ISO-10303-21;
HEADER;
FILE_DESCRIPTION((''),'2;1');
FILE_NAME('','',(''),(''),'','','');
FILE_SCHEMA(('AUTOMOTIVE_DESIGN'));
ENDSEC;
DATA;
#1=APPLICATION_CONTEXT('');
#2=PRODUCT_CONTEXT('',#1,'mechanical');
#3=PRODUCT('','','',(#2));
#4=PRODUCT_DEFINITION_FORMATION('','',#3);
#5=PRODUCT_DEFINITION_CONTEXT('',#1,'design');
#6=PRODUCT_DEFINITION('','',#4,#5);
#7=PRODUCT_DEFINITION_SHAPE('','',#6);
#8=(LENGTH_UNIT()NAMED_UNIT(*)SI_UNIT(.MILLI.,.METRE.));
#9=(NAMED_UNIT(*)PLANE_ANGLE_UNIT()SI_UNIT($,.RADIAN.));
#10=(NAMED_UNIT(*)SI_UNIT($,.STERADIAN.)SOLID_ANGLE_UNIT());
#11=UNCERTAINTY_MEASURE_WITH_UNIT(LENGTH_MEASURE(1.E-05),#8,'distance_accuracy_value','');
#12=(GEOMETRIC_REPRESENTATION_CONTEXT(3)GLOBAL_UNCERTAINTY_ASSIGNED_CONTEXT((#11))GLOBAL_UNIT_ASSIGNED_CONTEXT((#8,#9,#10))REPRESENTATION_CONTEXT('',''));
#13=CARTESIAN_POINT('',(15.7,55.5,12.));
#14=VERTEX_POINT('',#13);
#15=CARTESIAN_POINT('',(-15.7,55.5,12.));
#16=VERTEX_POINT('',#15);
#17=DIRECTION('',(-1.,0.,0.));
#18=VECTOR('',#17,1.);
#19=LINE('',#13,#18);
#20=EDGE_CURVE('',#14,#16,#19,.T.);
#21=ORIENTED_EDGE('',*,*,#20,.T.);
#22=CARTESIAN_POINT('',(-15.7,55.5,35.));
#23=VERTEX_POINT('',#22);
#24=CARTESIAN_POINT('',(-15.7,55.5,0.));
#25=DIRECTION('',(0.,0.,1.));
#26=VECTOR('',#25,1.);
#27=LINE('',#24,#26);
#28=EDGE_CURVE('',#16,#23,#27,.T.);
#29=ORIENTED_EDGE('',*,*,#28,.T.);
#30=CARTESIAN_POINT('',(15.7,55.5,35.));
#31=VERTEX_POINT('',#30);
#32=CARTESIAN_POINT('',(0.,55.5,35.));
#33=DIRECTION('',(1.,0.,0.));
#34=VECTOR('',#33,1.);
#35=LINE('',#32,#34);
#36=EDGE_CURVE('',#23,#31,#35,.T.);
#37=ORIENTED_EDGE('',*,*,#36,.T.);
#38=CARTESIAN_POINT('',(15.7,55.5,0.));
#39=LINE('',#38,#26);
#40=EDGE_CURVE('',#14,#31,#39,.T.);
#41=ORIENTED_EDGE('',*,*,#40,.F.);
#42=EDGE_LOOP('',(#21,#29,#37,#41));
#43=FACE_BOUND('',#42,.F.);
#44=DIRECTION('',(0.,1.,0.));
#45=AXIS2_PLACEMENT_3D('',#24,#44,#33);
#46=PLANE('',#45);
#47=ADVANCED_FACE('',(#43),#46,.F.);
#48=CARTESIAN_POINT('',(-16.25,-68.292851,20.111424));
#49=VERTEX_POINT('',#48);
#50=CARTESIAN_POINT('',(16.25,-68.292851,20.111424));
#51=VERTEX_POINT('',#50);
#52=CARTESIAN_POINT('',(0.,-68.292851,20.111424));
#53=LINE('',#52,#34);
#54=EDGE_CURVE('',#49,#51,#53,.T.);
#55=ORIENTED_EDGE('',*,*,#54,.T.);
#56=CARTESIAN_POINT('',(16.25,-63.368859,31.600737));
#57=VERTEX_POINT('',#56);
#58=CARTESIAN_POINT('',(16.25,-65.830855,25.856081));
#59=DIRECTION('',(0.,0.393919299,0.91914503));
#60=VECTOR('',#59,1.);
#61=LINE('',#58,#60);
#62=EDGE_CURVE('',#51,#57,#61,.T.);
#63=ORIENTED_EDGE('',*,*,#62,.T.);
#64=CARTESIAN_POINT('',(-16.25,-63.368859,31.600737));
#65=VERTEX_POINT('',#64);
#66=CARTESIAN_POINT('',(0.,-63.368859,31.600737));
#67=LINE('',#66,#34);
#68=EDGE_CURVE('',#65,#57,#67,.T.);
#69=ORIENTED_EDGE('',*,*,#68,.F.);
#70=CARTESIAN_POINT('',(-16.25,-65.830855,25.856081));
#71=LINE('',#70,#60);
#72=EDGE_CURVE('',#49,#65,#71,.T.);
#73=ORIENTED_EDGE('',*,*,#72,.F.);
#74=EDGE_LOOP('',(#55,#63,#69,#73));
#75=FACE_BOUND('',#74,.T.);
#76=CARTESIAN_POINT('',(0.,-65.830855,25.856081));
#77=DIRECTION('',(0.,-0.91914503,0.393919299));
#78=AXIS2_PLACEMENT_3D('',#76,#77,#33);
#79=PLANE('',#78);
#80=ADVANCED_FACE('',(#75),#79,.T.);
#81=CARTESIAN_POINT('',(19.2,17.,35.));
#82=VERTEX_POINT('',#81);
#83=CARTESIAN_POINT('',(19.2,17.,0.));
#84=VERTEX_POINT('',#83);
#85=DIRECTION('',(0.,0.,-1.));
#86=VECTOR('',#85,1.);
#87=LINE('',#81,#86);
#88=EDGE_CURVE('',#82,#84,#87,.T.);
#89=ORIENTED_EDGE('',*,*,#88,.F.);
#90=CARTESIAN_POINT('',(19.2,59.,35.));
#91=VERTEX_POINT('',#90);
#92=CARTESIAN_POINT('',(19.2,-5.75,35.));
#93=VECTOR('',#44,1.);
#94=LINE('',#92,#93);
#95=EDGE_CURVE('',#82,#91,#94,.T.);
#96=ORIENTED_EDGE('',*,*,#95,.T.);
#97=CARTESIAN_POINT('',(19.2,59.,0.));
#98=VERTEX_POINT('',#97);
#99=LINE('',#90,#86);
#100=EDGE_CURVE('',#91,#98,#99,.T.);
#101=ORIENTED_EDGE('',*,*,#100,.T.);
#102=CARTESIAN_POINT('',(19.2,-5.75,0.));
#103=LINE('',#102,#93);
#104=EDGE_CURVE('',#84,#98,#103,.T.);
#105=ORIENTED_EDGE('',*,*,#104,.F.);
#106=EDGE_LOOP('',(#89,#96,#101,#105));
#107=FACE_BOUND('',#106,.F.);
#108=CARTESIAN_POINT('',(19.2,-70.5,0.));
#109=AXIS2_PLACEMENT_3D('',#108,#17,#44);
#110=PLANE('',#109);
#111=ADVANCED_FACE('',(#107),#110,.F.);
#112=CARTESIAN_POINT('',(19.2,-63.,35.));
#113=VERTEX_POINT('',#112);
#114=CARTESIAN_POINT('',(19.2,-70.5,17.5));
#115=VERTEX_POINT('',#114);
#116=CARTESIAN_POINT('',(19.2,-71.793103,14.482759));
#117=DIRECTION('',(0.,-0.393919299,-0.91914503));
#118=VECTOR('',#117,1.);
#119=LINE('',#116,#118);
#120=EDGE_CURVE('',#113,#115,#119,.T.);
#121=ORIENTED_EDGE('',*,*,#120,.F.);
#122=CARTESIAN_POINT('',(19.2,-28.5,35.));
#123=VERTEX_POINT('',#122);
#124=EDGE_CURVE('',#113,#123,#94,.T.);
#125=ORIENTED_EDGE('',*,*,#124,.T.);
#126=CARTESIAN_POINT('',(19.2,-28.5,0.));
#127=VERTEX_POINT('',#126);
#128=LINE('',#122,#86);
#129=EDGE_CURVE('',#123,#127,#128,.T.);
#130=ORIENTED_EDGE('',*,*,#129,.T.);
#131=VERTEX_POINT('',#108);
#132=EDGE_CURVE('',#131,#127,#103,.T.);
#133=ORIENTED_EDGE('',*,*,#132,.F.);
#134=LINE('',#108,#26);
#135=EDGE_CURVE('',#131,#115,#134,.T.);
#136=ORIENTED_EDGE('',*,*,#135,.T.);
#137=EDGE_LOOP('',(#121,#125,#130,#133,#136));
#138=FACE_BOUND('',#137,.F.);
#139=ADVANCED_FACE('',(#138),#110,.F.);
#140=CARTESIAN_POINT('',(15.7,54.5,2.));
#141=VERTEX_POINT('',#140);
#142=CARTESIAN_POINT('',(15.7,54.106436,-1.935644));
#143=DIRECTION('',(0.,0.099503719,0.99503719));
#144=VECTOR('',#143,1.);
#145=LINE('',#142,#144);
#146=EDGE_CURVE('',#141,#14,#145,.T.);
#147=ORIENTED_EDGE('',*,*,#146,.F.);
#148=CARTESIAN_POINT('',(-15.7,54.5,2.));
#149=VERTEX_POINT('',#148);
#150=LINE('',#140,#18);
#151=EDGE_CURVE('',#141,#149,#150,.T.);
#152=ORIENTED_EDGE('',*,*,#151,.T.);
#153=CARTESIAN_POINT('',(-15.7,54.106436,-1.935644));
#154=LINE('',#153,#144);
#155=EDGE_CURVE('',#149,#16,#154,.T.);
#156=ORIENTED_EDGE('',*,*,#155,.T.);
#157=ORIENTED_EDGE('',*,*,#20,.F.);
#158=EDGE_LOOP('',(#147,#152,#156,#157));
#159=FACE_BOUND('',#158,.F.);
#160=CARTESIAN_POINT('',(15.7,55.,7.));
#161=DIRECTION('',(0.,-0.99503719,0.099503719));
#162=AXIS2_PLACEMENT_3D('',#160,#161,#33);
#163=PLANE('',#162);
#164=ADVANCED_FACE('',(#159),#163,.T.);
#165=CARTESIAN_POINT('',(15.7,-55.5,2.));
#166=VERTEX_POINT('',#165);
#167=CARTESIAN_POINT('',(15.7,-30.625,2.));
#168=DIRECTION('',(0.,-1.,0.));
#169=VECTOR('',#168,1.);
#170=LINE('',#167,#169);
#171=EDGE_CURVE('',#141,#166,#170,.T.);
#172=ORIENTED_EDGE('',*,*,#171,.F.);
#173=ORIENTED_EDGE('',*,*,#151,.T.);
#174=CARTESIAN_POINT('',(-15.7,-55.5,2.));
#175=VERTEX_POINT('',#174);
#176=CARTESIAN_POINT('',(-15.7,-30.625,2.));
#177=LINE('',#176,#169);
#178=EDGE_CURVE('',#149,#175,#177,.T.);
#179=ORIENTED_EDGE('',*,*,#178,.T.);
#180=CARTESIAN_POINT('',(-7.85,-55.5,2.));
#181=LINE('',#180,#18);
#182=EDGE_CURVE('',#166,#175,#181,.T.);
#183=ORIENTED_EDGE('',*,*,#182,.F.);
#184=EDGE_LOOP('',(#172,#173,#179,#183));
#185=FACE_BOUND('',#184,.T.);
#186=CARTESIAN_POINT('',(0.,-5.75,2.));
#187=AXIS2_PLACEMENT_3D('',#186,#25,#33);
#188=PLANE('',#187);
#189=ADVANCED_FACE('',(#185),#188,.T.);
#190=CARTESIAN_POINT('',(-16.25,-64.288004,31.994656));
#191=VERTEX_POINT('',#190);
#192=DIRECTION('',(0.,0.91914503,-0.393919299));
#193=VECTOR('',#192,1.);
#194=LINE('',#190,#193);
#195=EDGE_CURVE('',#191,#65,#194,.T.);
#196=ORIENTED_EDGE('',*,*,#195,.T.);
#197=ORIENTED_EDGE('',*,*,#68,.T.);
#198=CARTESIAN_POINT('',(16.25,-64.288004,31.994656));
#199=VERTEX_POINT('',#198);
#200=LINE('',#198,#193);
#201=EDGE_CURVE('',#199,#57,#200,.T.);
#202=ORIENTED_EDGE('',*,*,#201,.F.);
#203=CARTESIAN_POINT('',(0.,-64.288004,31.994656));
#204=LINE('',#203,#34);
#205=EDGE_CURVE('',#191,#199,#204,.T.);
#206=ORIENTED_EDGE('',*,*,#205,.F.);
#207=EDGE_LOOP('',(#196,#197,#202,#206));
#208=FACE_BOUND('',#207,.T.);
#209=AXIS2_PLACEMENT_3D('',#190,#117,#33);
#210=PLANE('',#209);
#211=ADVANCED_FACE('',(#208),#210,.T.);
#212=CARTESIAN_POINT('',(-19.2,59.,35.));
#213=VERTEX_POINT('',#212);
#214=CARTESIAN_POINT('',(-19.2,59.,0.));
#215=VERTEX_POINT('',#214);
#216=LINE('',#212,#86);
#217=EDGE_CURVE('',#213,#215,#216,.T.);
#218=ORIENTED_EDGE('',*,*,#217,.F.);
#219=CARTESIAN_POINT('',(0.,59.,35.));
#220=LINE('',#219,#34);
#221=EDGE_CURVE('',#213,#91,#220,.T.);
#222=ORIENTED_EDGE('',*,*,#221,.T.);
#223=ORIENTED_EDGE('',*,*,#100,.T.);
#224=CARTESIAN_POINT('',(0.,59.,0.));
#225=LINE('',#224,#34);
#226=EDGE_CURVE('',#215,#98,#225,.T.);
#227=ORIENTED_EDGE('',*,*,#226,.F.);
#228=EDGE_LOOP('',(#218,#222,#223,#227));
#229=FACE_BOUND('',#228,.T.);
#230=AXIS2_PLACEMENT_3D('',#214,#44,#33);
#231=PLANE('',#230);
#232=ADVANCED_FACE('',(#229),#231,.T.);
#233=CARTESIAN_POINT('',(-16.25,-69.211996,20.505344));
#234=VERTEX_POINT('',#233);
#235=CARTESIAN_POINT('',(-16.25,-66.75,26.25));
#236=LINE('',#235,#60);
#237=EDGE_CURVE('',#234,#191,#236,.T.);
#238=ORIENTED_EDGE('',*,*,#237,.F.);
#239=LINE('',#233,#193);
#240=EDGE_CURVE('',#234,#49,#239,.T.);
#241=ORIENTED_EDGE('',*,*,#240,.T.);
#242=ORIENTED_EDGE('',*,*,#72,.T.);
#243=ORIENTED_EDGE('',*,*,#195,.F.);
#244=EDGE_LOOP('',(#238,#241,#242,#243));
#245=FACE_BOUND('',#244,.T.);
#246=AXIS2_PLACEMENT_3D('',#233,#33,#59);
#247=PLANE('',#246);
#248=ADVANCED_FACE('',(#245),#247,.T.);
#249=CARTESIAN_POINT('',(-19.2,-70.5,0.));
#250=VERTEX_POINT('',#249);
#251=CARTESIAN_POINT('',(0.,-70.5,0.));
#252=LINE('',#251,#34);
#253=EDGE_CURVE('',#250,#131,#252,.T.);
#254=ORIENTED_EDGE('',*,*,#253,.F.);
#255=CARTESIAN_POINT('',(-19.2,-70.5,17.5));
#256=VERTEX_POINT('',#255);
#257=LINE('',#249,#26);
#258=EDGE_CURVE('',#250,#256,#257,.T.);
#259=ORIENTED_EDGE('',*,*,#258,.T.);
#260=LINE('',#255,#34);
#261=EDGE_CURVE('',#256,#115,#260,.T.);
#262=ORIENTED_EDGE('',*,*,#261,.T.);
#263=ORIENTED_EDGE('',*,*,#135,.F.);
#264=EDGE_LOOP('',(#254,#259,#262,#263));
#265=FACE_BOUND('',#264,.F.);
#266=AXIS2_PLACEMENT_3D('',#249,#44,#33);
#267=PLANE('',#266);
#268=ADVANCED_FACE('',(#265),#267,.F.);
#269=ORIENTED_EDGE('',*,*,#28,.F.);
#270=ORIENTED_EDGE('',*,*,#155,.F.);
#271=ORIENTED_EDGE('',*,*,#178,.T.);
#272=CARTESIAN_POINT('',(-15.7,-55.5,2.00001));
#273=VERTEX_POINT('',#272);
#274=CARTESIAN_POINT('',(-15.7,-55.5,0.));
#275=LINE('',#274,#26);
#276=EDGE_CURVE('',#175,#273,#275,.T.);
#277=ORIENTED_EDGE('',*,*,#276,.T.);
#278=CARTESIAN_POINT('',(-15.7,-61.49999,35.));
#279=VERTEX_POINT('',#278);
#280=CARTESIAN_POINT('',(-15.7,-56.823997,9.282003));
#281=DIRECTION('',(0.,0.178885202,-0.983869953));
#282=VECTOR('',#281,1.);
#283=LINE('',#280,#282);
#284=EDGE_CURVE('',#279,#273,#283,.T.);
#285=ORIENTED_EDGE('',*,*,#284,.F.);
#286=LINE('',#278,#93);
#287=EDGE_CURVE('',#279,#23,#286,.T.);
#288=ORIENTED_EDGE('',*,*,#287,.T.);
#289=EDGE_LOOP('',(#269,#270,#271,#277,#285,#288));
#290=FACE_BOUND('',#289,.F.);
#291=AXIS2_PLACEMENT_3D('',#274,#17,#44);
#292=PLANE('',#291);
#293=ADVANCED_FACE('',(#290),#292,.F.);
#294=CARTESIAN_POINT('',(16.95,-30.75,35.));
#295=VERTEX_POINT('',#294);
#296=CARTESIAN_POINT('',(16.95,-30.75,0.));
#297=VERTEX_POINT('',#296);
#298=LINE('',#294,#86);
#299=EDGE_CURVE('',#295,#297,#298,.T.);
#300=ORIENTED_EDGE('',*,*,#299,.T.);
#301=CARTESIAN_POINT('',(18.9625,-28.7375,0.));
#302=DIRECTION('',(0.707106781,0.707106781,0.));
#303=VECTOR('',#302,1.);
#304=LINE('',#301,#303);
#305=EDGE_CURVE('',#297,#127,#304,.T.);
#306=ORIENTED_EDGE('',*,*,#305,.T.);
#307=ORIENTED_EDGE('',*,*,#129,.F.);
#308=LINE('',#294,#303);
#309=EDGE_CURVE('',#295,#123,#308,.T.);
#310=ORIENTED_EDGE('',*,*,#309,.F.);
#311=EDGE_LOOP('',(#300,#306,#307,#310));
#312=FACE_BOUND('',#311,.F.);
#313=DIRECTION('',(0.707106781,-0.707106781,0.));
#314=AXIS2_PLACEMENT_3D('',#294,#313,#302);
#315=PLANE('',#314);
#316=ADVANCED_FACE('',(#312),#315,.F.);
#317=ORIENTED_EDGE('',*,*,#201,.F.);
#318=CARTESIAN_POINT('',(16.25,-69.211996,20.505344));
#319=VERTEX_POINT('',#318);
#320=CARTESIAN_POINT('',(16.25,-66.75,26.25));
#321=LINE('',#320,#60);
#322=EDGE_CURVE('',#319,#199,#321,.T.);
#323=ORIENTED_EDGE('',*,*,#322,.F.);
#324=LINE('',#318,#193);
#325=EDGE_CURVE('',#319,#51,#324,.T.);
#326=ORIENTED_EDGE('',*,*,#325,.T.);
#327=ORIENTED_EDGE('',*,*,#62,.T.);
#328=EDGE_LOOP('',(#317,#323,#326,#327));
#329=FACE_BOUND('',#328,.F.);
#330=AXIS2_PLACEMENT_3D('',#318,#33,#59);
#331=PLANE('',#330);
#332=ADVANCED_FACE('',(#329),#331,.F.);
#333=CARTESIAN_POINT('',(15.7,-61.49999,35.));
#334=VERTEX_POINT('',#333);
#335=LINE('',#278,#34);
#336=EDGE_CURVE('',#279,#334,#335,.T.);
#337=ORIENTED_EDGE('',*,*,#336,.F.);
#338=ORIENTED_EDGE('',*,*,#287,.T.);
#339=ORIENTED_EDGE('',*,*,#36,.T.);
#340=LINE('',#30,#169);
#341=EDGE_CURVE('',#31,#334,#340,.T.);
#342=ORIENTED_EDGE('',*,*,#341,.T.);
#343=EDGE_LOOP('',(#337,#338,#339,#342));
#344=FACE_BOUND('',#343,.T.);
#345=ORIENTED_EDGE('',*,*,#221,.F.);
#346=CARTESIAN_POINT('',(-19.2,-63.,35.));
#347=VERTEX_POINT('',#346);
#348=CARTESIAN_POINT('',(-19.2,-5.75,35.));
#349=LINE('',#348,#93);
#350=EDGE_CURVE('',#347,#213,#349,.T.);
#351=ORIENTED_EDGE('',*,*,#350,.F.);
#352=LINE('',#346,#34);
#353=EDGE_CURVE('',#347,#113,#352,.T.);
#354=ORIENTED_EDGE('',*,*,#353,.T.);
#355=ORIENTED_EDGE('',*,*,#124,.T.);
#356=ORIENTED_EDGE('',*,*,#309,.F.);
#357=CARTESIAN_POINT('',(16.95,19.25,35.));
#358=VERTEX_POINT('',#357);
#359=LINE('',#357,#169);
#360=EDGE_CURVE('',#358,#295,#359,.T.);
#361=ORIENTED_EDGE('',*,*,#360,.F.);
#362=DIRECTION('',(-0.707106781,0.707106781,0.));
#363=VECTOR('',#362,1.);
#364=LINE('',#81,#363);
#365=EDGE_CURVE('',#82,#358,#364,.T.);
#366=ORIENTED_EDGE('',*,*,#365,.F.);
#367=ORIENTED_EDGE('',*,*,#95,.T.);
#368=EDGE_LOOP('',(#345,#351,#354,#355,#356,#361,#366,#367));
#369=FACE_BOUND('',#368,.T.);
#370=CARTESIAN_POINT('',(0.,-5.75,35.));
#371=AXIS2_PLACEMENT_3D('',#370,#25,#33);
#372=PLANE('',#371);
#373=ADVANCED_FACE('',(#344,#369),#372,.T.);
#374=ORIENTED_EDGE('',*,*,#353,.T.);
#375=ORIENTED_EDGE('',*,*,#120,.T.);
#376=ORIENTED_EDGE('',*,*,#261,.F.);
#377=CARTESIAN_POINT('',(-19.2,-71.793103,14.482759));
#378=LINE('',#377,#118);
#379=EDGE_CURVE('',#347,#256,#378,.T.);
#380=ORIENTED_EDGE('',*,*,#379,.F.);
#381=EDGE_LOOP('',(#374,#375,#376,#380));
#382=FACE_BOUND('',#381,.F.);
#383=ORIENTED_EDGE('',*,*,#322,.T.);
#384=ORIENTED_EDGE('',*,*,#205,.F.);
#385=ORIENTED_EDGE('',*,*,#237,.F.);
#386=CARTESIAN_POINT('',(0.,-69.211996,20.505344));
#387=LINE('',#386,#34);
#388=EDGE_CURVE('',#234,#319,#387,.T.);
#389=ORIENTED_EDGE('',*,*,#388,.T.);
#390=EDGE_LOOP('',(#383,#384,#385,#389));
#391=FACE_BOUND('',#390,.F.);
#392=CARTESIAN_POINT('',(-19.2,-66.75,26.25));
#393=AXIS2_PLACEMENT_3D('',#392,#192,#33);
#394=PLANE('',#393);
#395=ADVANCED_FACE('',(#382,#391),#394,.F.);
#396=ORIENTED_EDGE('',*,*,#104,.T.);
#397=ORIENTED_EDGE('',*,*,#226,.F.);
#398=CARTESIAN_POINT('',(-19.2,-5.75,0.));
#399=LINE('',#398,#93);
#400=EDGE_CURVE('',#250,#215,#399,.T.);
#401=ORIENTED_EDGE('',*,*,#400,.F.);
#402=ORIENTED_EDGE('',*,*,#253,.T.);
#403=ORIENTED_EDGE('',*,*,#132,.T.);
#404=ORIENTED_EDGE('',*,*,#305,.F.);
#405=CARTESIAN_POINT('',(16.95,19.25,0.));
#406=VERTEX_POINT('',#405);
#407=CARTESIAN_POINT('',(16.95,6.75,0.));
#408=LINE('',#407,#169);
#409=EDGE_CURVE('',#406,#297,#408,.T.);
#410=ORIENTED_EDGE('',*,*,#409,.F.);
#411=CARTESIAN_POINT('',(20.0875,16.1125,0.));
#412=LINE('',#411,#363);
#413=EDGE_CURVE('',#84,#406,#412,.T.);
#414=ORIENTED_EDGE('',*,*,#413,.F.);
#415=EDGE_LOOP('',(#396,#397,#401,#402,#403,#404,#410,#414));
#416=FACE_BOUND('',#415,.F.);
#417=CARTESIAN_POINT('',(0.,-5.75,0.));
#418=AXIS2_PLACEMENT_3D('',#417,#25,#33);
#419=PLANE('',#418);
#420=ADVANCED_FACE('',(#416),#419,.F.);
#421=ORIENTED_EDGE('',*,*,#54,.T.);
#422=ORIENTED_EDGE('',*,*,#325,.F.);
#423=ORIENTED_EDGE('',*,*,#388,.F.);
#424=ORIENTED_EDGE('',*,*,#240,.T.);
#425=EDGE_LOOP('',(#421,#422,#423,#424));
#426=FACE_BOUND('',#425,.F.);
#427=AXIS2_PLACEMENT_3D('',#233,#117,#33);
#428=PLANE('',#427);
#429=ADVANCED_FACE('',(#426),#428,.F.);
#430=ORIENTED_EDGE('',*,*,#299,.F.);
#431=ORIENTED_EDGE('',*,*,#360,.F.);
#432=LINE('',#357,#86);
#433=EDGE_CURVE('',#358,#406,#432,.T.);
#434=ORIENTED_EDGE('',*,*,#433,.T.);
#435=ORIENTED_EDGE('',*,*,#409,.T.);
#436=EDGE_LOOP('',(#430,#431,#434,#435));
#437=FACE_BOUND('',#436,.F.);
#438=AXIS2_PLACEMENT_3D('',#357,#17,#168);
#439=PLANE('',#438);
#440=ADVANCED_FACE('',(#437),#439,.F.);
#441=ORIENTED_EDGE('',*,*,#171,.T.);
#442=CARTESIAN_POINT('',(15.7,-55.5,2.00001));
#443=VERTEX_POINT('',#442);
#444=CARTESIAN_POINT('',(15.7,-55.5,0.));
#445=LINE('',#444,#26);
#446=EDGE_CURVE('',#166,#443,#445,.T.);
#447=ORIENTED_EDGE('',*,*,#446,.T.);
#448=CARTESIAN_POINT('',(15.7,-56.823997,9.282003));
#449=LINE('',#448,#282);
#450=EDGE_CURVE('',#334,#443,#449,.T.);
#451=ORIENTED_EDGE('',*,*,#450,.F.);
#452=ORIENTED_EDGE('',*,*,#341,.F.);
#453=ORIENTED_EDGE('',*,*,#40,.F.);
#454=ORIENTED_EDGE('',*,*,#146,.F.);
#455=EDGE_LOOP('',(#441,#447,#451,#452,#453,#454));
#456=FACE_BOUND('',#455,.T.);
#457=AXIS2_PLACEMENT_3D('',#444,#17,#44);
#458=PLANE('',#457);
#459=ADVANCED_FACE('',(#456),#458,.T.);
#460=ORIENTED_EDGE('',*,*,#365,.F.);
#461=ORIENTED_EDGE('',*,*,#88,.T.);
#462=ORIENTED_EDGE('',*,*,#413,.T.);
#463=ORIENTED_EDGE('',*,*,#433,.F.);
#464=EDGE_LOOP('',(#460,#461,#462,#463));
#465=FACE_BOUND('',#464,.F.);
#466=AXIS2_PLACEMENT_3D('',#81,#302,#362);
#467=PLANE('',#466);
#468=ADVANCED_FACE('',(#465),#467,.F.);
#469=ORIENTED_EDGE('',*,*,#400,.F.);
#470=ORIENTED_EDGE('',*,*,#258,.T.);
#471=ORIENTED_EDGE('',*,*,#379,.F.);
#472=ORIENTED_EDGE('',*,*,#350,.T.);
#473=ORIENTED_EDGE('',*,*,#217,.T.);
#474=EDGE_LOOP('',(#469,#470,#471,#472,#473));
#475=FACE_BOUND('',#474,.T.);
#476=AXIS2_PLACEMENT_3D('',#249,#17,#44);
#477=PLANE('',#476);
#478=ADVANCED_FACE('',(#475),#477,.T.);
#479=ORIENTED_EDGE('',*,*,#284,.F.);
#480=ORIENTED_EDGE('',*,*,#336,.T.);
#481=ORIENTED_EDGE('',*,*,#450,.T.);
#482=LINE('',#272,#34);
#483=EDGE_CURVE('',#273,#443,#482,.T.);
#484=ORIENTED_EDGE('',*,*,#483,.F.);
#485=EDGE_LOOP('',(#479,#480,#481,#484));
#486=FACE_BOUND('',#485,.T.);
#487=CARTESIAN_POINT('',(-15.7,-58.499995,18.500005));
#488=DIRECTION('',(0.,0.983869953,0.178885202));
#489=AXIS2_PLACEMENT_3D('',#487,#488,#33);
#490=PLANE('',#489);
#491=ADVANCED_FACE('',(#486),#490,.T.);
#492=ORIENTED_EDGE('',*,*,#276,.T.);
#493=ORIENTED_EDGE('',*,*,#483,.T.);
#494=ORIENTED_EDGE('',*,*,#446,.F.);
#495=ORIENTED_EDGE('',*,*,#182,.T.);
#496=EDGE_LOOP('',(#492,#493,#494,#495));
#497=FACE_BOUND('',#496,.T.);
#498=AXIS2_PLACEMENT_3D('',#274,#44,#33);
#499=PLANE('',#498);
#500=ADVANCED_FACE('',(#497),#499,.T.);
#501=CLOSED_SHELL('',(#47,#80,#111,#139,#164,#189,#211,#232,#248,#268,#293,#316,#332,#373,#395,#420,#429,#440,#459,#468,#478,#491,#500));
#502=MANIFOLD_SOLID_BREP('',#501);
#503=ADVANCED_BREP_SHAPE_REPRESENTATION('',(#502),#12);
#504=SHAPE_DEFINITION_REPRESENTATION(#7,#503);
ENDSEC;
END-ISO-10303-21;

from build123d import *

# Parameters (mm, degrees)
F0_W     = 38.4
F0_H     = 129.5
F0_W_2   = 31.4
F0_H_2   = 111
F1_DEPTH = 2
F2_DEPTH = 35
F3_SIZE2 = 17.5
F3_SIZE  = 7.5
F4_SIZE2 = 32.99999
F4_SIZE  = 5.99999
F6_DEPTH = 35.001
F7_W     = 32.5
F7_H     = 12.5
F8_DEPTH = 1
F9_SIZE2 = 10
F9_SIZE  = 1


# Not quite as in the source:
# - a fillet or chamfer is up to 0.001 mm smaller than in the source, because OpenCascade refuses the exact size


with BuildPart() as f1:
    # F0 (on Top) → F1 (new body)
    with BuildSketch(Plane.XY):
        with Locations((0, -5.75)):
            Rectangle(F0_W, F0_H)
        Rectangle(F0_W_2, F0_H_2, mode=Mode.SUBTRACT)
        Rectangle(F0_W_2, F0_H_2)
    extrude(amount=F1_DEPTH)

    # F0 (on Top) → F2 (join)
    with BuildSketch(Plane.XY):
        with Locations((0, -5.75)):
            Rectangle(F0_W, F0_H)
        Rectangle(F0_W_2, F0_H_2, mode=Mode.SUBTRACT)
    extrude(amount=F2_DEPTH)

    # F3
    f3_edges = [f1.edges().sort_by_distance(p)[0] for p in [
        (0, -70.5, 35),
    ]]
    f3_side = f1.faces().sort_by_distance((0, -69.149266, 35))[0]
    chamfer(f3_edges, length=F3_SIZE, length2=F3_SIZE2, reference=f3_side)

    # F4 (size 6 and 33 in the source; OpenCascade refuses exactly that, so slightly less here)
    f4_edges = [f1.edges().sort_by_distance(p)[0] for p in [
        (0, -55.5, 35),
    ]]
    f4_side = f1.faces().sort_by_distance((17.920994, -2, 35))[0]
    chamfer(f4_edges, length=F4_SIZE, length2=F4_SIZE2, reference=f4_side)

    # F5 (on face) → F6 (cut, through all)
    with BuildSketch(Plane.XY.offset(35)):
        Polygon((19.2, -28.5), (19.2, 17), (16.95, 19.25), (16.95, -30.75), align=None)
    extrude(amount=-F6_DEPTH, mode=Mode.SUBTRACT)

    # F7 (on face) → F8 (cut)
    with BuildSketch(Plane(origin=(0, -65.8965517241, 28.2413793103), x_dir=(1, 0, 0), z_dir=(0, -0.91914503, 0.3939192986))):
        with Locations((0, -2.1665561422)):
            Rectangle(F7_W, F7_H)
    extrude(amount=-F8_DEPTH, mode=Mode.SUBTRACT)

    # F9
    f9_edges = [f1.edges().sort_by_distance(p)[0] for p in [
        (0, 55.5, 2),
    ]]
    f9_side = f1.faces().sort_by_distance((0, 0, 2))[0]
    chamfer(f9_edges, length=F9_SIZE, length2=F9_SIZE2, reference=f9_side)


solid = f1.part
